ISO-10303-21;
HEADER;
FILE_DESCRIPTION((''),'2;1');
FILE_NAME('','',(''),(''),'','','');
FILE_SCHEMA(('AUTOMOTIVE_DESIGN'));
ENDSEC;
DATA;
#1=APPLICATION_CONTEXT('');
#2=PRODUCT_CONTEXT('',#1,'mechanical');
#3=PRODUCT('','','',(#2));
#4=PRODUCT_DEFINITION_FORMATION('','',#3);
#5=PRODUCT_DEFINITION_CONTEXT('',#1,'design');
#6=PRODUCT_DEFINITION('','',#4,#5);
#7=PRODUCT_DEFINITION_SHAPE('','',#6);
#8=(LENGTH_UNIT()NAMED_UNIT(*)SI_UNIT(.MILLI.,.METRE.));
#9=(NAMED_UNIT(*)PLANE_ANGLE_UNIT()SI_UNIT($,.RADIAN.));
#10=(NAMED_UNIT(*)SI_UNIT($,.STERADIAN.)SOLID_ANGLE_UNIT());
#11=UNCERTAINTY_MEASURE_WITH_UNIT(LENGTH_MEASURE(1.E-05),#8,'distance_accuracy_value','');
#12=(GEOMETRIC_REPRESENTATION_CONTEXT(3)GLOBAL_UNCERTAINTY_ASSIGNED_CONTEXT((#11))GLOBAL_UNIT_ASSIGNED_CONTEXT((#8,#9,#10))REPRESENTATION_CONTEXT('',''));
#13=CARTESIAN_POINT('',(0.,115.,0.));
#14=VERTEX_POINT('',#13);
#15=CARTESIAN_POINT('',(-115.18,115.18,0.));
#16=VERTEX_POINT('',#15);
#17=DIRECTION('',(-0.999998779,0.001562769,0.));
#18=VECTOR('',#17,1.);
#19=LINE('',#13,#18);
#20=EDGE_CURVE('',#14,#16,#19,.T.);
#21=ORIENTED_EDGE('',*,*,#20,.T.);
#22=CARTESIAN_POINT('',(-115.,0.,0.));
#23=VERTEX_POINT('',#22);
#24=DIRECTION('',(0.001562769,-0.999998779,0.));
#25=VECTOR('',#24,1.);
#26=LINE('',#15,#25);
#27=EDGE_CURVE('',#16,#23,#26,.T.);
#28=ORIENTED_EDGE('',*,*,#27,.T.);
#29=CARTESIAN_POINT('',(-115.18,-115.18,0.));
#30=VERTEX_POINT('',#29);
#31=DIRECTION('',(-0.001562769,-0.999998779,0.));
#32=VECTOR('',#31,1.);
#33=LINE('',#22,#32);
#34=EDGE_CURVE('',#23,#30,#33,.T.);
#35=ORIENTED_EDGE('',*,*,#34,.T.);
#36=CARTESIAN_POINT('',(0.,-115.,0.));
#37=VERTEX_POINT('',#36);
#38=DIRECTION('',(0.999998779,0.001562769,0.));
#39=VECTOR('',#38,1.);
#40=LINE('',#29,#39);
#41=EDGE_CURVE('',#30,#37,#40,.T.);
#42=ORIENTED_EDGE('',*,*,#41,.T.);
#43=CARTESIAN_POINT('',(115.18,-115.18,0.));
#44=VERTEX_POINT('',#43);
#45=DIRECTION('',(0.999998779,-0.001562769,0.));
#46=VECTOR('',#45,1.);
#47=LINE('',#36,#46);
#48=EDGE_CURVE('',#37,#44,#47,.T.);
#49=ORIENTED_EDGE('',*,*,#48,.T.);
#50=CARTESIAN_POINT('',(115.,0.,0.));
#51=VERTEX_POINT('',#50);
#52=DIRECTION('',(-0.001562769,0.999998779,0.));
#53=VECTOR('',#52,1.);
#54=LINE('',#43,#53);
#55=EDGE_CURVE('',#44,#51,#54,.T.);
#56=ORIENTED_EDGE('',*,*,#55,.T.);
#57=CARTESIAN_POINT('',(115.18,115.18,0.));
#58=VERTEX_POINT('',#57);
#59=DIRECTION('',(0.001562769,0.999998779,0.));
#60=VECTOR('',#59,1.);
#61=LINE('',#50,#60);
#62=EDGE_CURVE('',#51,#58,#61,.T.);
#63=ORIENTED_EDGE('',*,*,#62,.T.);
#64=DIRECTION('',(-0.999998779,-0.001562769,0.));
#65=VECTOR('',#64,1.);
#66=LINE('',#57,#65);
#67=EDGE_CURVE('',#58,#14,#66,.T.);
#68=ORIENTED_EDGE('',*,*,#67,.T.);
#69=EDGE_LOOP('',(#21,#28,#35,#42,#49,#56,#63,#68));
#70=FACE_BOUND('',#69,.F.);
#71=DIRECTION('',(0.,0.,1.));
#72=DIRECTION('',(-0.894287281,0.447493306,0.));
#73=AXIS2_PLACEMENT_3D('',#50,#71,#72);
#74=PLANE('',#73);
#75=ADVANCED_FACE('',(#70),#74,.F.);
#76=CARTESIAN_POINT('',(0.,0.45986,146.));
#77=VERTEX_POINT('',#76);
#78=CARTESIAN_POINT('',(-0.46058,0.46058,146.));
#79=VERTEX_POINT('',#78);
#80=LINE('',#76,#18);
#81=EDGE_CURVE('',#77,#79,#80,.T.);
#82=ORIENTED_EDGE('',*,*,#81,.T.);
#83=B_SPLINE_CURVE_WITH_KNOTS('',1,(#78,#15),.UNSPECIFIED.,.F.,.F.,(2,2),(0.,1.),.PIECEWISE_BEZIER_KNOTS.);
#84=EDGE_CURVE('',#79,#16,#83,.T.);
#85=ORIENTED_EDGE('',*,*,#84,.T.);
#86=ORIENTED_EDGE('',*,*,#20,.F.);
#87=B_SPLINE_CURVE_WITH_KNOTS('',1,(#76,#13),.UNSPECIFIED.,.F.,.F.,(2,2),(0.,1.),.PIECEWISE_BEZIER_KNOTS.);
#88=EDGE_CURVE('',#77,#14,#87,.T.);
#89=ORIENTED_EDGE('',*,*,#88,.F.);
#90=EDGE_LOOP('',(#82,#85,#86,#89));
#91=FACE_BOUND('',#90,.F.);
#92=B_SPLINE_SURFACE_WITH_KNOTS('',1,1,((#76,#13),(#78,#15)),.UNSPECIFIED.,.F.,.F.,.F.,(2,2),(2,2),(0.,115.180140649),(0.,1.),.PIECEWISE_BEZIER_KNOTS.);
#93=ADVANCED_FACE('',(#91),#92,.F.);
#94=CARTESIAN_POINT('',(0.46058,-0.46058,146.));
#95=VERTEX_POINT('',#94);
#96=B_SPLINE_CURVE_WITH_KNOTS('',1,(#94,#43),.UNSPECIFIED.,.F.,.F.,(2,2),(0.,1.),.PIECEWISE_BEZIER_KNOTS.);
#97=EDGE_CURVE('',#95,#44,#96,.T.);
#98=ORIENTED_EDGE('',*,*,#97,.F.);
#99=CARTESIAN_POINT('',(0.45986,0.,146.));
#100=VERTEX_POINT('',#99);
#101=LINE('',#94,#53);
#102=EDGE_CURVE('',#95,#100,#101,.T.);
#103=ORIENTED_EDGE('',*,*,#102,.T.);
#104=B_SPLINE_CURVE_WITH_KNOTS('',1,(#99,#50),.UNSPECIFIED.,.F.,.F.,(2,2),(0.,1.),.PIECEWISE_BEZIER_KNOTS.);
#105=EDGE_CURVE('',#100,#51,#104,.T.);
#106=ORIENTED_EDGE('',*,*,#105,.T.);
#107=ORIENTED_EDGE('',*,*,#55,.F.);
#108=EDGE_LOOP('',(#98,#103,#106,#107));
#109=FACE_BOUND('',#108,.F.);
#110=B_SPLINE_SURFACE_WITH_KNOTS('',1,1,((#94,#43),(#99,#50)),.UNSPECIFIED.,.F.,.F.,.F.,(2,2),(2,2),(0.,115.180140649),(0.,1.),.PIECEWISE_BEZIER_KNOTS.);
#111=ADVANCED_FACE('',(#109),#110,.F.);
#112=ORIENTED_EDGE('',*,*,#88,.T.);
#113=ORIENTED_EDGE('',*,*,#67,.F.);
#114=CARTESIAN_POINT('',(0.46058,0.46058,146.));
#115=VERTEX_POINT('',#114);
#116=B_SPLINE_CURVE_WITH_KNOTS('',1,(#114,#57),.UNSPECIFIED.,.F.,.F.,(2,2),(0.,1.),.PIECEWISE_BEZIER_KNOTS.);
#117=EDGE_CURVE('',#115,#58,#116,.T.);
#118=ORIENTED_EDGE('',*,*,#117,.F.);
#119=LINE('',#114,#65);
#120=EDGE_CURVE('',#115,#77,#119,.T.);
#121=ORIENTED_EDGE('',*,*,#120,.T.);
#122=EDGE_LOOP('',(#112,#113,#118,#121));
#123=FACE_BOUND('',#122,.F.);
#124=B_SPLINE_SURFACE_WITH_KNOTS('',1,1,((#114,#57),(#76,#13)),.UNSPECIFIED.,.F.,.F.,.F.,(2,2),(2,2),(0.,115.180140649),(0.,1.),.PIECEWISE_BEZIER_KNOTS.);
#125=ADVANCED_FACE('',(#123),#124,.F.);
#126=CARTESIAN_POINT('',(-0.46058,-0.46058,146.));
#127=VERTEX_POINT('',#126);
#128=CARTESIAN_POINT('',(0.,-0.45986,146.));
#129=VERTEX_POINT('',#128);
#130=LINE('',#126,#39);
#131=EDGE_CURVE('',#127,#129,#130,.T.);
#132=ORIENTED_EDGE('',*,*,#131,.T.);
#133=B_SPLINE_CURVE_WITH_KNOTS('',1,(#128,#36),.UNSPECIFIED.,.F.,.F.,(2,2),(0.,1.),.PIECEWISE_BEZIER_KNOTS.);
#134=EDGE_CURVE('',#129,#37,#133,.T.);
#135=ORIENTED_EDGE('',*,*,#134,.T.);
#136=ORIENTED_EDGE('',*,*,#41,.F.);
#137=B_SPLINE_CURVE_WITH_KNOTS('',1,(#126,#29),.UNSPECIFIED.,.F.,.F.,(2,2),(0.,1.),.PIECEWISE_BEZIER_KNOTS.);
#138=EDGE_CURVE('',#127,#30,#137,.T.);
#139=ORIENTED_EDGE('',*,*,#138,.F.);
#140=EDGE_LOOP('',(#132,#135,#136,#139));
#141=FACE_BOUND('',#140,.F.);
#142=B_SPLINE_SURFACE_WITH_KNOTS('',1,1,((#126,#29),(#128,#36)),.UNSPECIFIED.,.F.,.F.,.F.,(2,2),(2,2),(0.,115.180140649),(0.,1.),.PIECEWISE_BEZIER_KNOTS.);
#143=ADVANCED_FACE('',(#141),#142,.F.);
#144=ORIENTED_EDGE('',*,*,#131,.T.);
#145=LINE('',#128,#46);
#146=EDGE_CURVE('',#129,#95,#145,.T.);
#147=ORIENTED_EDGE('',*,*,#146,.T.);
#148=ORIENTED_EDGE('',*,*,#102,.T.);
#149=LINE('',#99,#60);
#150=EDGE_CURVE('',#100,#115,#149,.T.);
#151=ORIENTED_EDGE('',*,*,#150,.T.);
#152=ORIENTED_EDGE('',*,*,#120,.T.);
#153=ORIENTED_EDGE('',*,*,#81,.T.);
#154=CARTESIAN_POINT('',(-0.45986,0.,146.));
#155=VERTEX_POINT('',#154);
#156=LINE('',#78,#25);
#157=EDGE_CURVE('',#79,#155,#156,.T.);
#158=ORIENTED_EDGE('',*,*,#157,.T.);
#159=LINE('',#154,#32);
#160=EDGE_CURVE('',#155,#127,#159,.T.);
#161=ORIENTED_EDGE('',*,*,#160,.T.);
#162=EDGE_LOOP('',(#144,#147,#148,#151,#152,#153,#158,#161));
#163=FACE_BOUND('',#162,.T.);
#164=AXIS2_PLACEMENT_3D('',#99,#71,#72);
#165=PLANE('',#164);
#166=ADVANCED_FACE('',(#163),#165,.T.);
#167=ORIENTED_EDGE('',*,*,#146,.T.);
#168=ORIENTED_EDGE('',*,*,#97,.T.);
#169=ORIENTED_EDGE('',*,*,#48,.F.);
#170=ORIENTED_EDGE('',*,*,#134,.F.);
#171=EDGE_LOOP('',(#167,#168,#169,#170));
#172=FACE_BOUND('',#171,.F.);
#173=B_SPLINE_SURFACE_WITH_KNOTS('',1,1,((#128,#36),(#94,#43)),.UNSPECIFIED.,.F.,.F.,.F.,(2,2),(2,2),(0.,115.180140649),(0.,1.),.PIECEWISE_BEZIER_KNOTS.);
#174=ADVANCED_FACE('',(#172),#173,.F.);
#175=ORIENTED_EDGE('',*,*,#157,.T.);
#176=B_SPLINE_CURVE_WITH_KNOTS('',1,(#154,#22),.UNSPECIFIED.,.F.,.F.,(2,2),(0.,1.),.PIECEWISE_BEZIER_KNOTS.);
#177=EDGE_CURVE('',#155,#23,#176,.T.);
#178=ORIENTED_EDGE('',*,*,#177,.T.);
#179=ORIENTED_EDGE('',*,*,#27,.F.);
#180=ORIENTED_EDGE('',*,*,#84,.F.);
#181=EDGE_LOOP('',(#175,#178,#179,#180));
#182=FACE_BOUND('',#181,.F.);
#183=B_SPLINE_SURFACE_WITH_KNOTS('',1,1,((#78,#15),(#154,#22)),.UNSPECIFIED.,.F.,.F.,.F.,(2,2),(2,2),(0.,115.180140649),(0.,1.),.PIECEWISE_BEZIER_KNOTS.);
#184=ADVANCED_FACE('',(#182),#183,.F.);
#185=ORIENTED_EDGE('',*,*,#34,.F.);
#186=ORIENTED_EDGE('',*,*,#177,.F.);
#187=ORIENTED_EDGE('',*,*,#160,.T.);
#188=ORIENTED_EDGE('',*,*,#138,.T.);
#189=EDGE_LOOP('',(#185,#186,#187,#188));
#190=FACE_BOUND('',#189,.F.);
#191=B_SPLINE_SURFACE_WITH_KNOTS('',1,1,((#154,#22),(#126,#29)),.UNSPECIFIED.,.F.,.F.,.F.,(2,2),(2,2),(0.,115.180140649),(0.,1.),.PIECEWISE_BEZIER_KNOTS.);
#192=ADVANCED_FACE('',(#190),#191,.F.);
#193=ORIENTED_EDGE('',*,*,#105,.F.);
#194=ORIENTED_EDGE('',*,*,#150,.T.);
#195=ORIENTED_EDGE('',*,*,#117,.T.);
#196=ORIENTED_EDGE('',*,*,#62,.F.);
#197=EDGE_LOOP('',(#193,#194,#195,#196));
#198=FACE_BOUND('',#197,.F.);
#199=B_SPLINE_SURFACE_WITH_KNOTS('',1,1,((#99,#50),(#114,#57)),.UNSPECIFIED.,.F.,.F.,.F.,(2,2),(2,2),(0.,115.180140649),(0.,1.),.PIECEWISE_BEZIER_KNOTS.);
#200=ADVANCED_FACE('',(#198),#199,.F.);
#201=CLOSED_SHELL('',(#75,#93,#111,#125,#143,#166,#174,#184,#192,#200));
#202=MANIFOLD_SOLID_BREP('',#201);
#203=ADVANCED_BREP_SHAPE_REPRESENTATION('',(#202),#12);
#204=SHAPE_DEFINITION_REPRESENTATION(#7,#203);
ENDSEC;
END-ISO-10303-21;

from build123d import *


# Not quite as in the source:
# - a feature of the source that left no trace in its solid (it failed there, or was rolled back) is left out


with BuildPart() as f3:
    # F2 (on offset) → F3 section 0
    with BuildSketch(Plane.XY.offset(146)):
        Polygon((0.4598601322, 0), (0.4605799133, 0.4605799133), (0, 0.4598601322), (-0.4605799133, 0.4605799133), (-0.4598601322, 0), (-0.4605799133, -0.4605799133), (0, -0.4598601322), (0.4605799133, -0.4605799133), align=None)
    # F0 (on Top) → F3 section 1
    with BuildSketch(Plane.XY):
        Polygon((0, 115), (-115.18, 115.18), (-115, 0), (-115.18, -115.18), (0, -115), (115.18, -115.18), (115, 0), (115.18, 115.18), align=None)
    loft()


solid = f3.part
